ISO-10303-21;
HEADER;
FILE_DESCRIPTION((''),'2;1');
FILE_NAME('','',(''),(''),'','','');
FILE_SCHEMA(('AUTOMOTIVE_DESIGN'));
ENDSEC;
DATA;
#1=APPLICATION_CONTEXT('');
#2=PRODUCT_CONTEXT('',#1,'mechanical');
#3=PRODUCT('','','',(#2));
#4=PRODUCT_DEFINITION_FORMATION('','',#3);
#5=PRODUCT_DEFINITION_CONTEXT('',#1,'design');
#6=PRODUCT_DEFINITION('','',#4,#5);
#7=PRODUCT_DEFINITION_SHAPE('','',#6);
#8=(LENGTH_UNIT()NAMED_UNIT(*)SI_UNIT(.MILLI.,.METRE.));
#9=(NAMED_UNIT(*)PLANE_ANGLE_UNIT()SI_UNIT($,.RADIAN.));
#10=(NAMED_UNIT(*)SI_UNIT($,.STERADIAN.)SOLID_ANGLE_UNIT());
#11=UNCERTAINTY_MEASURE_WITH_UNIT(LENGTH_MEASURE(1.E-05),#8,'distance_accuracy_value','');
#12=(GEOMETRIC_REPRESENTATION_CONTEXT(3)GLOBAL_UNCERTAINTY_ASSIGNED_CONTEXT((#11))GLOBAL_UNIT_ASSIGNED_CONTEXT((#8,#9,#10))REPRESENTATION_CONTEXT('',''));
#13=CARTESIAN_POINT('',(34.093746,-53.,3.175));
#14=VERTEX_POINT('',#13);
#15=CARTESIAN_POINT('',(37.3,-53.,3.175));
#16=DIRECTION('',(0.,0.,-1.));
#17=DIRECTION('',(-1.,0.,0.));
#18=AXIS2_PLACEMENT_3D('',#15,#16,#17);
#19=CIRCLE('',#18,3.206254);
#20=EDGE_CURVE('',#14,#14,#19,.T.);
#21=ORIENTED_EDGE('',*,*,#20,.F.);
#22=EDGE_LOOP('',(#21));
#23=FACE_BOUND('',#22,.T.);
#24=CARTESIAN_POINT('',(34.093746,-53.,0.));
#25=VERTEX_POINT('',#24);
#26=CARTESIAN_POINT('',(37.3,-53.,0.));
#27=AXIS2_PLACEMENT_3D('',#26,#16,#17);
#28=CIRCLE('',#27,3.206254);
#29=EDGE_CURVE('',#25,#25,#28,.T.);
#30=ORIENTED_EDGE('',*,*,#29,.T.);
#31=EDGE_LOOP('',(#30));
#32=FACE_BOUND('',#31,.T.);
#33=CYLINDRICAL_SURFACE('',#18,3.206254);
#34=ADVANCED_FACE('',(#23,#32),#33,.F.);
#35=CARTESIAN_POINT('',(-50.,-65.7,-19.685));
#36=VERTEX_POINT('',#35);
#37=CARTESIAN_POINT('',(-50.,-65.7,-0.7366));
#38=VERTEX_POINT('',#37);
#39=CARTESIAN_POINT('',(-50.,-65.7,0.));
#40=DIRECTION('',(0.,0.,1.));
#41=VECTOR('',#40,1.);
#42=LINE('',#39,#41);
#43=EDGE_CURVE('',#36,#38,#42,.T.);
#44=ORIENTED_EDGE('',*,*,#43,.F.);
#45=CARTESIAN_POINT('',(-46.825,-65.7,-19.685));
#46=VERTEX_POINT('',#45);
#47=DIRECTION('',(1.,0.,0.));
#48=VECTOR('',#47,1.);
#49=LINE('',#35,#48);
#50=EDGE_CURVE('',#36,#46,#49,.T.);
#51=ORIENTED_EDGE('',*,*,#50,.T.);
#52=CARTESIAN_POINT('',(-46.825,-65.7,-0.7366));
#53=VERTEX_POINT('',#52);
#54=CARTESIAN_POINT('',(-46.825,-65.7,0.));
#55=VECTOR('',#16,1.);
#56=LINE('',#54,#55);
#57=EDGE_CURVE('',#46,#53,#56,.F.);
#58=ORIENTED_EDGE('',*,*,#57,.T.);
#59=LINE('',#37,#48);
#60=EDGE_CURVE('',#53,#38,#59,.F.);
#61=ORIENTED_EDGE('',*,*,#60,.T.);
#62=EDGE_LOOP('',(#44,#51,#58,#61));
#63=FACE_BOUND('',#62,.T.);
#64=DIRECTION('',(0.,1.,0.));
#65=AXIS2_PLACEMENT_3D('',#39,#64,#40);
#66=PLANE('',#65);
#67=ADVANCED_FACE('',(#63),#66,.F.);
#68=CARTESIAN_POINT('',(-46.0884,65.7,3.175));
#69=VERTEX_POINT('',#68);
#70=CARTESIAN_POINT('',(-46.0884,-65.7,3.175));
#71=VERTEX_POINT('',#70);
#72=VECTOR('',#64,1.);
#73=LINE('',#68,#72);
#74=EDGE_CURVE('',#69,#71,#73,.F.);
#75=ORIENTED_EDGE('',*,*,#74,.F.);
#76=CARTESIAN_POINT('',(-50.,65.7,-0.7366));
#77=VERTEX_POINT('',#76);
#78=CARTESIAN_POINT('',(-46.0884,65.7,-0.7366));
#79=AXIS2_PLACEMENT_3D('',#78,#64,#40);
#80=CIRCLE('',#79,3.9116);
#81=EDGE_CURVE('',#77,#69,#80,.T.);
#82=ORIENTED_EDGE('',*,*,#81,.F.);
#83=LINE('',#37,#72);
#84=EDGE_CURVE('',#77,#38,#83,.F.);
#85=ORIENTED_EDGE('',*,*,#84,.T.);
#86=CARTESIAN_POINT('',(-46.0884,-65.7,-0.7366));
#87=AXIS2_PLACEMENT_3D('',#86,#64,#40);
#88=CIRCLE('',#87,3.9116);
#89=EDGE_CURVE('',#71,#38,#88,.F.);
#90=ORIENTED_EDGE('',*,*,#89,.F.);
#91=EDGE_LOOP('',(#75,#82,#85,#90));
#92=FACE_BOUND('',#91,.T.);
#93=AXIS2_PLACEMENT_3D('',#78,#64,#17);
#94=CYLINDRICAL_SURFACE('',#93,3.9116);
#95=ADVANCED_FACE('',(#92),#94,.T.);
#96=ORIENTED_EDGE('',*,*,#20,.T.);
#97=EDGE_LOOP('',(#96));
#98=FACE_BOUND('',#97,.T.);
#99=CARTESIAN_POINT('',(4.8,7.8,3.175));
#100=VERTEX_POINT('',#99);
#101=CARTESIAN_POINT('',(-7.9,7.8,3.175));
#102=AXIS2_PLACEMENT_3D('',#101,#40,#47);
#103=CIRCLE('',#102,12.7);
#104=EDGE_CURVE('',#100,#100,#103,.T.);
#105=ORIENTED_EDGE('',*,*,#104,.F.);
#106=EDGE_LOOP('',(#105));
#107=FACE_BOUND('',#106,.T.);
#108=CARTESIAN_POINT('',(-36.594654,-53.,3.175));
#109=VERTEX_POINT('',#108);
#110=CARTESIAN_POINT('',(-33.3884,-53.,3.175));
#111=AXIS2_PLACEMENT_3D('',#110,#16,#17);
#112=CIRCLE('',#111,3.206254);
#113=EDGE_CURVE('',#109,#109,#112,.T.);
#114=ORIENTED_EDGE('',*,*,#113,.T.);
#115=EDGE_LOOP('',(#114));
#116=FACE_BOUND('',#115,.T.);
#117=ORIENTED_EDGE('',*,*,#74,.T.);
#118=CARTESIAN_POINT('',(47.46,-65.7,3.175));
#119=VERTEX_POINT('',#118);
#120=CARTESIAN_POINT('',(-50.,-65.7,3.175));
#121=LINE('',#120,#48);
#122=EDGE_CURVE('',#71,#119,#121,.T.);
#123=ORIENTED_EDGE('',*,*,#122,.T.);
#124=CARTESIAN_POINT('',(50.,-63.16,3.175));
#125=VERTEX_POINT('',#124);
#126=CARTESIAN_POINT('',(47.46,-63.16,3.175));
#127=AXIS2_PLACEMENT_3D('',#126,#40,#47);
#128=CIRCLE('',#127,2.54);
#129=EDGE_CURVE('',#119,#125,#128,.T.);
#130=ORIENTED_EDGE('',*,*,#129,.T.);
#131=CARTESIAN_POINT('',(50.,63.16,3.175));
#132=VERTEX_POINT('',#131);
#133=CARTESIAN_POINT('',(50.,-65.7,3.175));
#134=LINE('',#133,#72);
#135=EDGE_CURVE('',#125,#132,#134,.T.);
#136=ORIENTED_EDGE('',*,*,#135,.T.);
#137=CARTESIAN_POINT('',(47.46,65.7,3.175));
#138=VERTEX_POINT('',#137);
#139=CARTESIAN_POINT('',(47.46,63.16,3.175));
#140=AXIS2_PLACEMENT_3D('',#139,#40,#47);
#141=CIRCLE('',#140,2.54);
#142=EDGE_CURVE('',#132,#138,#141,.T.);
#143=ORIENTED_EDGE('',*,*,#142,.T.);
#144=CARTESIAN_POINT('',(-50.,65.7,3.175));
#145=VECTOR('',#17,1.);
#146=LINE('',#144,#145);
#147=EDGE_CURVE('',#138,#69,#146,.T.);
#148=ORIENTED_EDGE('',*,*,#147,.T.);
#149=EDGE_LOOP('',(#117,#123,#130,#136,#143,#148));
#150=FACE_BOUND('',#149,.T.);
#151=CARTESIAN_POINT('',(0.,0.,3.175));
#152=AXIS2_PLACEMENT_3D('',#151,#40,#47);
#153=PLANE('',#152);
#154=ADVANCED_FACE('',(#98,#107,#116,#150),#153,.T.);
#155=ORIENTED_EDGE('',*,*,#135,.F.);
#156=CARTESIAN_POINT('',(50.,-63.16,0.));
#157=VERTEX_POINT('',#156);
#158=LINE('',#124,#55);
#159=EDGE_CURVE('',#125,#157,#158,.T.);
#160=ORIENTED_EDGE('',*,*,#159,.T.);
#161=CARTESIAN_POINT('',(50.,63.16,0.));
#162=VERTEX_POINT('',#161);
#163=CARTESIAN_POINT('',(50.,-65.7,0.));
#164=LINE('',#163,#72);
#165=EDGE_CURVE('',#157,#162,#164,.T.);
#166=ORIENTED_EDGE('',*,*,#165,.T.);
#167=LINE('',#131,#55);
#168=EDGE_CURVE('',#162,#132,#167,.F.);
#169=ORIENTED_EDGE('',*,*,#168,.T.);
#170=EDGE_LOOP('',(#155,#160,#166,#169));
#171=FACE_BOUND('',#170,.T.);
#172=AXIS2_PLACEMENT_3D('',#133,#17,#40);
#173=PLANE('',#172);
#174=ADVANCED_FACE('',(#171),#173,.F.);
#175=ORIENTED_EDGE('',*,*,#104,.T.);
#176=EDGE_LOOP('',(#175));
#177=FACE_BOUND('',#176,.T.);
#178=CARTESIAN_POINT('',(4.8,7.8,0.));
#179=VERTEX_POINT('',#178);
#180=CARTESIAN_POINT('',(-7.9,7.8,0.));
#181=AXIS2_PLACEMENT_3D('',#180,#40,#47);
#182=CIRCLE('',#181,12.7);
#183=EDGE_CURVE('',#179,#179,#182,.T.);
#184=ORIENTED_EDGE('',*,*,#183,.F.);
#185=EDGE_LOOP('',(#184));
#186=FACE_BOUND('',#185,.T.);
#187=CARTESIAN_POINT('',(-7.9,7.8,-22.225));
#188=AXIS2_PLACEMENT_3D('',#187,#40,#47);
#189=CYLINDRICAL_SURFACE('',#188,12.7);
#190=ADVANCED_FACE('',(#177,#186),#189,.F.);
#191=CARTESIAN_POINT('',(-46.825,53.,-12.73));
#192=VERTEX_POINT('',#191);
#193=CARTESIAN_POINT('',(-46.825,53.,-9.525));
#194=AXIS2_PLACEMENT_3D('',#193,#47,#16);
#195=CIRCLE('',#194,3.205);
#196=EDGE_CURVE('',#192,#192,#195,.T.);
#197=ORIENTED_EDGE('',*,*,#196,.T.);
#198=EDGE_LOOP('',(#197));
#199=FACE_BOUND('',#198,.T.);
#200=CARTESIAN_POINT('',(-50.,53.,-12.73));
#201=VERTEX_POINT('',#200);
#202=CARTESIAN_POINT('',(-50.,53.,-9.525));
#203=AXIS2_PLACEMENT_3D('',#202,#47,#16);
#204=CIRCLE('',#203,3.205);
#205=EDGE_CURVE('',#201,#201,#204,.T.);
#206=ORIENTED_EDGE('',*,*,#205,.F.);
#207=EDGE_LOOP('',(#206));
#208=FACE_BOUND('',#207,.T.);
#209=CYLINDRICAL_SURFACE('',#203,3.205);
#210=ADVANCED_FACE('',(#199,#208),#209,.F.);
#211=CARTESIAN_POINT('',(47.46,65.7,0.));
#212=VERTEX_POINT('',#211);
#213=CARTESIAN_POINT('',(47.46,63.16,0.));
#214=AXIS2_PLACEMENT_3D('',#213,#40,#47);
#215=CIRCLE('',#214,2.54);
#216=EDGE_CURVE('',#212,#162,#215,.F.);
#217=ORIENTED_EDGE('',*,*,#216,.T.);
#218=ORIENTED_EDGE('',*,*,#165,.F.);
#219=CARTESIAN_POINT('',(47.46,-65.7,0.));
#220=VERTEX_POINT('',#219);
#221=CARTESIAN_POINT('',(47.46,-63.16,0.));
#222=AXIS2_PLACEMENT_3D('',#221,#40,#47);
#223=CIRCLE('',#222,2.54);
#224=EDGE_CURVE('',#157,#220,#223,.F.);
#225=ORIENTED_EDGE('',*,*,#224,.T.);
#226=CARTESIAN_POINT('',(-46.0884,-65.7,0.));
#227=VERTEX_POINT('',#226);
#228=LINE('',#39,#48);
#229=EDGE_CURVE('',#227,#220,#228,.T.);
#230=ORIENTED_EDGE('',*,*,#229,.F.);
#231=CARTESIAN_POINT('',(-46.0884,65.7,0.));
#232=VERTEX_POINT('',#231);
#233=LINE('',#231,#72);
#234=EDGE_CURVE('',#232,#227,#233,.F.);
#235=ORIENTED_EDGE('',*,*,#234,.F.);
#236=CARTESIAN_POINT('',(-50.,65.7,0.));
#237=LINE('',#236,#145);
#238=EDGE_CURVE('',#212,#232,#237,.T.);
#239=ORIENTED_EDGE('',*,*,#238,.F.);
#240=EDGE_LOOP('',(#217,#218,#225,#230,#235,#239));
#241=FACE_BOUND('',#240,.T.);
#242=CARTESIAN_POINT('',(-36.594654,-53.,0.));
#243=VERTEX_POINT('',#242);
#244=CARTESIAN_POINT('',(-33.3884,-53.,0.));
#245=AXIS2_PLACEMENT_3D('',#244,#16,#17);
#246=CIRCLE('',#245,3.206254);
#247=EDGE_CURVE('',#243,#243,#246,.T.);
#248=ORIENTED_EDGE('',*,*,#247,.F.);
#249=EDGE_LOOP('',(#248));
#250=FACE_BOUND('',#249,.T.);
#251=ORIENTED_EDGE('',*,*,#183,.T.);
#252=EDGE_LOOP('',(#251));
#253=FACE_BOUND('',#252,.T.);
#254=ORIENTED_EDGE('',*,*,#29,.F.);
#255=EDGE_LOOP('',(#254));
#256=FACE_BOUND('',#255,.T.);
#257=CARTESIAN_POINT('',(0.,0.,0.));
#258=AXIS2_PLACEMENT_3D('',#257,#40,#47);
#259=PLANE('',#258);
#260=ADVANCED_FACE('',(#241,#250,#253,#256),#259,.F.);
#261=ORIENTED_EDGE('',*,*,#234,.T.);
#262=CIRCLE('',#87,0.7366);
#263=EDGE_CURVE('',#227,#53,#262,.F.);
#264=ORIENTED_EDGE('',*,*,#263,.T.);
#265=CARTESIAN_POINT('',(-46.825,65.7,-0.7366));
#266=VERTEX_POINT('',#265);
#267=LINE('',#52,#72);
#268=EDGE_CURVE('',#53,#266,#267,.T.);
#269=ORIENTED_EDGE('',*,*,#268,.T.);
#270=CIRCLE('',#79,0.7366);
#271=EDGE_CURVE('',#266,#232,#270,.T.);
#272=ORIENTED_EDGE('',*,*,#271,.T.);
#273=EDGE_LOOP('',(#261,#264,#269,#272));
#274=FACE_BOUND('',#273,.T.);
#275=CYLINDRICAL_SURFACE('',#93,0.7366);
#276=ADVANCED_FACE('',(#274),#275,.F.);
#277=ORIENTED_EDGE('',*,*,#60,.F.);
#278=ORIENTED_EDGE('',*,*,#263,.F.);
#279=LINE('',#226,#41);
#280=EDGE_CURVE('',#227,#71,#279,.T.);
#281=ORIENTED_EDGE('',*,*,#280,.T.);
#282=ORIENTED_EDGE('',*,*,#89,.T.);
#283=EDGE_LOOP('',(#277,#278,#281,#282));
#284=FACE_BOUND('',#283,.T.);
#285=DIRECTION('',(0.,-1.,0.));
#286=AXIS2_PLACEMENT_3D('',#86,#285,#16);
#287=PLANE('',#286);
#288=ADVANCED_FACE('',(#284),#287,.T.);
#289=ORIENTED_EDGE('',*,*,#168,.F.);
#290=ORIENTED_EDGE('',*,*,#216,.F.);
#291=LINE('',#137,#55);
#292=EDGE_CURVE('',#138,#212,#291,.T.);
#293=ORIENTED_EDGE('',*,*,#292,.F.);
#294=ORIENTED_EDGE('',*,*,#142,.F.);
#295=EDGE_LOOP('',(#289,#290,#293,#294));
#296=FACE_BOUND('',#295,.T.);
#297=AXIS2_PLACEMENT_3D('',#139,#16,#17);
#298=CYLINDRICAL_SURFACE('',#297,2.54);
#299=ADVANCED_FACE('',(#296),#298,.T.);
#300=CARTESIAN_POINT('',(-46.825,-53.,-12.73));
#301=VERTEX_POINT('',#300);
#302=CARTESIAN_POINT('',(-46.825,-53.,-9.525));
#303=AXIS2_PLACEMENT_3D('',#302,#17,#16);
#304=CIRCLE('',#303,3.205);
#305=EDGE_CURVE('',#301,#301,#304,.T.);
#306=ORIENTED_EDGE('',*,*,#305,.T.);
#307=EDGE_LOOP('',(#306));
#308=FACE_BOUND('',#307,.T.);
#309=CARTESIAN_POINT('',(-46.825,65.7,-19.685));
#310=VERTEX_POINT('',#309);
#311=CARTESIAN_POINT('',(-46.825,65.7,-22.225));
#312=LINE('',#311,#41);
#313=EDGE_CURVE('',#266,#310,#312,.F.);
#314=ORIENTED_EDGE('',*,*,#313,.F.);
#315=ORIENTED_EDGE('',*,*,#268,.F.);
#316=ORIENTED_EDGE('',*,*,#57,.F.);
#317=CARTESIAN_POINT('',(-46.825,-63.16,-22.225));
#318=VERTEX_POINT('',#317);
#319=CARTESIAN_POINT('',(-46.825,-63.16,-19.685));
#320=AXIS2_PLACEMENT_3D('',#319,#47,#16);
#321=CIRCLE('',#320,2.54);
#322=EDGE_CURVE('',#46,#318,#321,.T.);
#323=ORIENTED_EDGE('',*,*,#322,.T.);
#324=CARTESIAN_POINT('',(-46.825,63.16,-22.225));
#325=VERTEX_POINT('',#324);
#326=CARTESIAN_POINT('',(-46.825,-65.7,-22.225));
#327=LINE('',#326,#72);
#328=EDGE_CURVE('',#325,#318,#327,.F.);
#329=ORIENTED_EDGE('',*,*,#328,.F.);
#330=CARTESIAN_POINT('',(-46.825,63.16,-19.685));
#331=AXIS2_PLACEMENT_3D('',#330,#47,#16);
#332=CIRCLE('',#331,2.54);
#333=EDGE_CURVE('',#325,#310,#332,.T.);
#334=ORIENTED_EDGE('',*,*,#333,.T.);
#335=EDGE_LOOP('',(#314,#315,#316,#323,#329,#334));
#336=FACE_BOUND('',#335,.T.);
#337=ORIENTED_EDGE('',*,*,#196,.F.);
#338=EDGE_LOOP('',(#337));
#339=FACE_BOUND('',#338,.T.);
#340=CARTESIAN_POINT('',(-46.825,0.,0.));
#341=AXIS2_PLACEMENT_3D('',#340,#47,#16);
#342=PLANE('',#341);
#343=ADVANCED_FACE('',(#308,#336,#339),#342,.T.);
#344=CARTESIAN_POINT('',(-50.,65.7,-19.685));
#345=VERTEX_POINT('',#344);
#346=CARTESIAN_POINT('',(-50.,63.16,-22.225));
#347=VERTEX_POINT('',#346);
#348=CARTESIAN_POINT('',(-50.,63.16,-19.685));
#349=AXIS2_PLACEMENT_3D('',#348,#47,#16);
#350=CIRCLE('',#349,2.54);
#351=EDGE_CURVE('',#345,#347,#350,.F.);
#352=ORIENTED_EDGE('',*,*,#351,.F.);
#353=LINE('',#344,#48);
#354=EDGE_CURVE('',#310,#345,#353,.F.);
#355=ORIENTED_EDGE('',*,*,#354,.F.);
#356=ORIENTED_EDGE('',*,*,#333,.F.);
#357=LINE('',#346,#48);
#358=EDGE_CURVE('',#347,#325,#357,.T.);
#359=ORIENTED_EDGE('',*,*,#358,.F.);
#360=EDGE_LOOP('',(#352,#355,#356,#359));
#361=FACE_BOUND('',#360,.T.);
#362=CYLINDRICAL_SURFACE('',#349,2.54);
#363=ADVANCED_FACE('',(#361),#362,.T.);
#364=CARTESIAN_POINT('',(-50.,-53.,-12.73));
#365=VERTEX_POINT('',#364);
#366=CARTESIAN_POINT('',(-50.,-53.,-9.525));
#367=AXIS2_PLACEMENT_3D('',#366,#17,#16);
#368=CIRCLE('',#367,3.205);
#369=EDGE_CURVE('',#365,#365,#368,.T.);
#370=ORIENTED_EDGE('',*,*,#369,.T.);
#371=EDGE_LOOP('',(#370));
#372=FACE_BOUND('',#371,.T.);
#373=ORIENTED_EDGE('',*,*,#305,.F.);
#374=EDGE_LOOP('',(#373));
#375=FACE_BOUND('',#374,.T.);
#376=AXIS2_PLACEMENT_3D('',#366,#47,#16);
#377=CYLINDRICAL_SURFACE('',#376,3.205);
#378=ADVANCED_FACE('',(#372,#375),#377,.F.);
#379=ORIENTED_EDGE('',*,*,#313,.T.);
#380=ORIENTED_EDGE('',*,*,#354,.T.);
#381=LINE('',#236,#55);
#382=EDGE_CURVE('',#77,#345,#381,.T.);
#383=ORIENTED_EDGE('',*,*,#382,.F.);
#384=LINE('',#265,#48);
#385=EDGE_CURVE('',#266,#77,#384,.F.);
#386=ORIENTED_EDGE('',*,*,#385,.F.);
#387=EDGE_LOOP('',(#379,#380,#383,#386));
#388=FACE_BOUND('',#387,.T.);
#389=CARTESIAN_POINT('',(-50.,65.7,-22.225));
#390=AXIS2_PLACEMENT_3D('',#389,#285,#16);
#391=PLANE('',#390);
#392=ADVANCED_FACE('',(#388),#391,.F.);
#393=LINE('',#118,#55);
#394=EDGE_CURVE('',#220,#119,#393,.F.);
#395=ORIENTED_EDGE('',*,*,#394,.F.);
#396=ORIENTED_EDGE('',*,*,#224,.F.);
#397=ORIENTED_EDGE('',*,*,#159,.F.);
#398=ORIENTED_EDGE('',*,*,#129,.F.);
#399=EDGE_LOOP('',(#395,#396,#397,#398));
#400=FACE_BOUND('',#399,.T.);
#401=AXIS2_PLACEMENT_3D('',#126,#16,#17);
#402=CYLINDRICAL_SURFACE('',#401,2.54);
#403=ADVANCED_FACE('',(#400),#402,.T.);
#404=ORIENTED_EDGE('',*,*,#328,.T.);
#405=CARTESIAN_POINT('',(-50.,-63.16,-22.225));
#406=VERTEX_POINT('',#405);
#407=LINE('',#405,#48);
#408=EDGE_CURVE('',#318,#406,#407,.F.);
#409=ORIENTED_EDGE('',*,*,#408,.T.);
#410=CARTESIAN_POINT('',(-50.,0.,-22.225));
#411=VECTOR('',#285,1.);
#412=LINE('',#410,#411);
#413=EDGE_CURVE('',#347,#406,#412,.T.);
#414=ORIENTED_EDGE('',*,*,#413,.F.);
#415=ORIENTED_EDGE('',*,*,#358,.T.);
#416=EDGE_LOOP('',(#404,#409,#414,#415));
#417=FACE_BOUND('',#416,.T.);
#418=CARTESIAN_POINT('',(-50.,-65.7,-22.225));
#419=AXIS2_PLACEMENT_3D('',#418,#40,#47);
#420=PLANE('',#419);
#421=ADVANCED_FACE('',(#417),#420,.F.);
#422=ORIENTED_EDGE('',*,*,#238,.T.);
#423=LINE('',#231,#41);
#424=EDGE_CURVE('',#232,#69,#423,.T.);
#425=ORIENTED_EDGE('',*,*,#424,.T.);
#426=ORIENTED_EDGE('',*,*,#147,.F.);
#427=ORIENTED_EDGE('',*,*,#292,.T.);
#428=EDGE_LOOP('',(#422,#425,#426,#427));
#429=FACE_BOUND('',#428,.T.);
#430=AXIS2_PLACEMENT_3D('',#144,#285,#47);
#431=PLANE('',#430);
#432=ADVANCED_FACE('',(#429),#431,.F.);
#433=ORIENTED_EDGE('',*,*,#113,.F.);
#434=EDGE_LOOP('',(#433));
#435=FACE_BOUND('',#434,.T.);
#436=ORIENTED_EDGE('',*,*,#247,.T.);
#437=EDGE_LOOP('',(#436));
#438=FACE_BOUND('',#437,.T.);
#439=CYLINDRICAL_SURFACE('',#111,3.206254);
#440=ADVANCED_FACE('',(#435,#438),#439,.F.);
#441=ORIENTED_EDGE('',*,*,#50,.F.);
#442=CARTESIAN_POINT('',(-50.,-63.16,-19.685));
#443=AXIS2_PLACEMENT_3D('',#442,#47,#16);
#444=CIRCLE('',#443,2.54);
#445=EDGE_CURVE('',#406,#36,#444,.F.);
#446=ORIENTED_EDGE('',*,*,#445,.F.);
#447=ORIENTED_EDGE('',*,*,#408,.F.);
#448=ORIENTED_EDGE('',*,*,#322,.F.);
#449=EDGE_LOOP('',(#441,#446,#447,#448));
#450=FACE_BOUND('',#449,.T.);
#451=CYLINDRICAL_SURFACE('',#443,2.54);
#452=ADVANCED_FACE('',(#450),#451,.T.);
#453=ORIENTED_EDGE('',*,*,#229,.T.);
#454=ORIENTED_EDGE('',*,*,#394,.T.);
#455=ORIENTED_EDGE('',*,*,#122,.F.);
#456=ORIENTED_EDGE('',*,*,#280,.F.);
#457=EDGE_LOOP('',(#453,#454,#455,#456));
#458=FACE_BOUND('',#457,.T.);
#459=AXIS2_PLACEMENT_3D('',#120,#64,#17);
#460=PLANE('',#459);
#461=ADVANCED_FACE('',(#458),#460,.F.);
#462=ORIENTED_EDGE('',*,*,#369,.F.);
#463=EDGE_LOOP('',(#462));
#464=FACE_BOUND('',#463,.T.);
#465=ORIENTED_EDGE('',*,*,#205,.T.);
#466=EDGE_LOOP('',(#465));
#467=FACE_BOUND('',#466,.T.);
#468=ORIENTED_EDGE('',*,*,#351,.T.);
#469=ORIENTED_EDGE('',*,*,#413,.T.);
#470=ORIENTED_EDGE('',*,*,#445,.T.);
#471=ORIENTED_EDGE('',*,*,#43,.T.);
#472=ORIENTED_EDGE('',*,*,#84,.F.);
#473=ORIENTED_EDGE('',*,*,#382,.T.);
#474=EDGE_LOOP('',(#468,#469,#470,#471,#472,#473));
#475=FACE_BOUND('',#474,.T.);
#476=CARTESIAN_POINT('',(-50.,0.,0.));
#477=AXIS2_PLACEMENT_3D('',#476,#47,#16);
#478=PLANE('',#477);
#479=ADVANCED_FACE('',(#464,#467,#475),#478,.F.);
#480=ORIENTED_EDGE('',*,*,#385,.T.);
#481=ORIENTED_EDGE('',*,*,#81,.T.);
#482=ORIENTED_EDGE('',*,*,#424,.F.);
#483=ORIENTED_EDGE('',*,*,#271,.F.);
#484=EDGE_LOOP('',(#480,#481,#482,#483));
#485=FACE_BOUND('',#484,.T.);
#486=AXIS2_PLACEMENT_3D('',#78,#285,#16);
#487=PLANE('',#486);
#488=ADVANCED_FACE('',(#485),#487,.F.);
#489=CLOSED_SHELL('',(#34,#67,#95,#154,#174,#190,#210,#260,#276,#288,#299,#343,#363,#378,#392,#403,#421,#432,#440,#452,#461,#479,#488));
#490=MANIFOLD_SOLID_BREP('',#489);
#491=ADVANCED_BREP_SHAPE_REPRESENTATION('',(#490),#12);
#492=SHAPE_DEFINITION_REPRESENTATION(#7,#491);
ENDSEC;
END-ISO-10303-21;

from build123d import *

# Parameters (mm, degrees)
SKETCH1_W                    = 131.4
SKETCH1_H                    = 100
BASE_FLANGE1_DEPTH           = 3.175
EDGE_FLANGE1_STRIP_W         = 14.1732
EDGE_FLANGE1_STRIP_H         = 3.175
EDGE_FLANGE1_STRIP_CUT_DEPTH = 131.4
EDGE_FLANGE1_DEPTH           = 131.4
FILLET1_R                    = 2.54
SKETCH15_R                   = 12.7
MOTOR_HOLE_DEPTH             = 87.380842784
SKETCH9_R                    = 3.205
CUT_EXTRUDE1_DEPTH           = 120.102985899
SKETCH10_R                   = 3.206253706
CUT_EXTRUDE2_DEPTH           = 86.501114759


# Sheet-metal steps are written as plain solids
with BuildPart() as part:
    # Sketch1 → Base-Flange1 (new body)
    with BuildSketch(Plane(origin=(0, 0, 0), x_dir=(0, 1, 0), z_dir=(0, 0, 1))):
        Rectangle(SKETCH1_W, SKETCH1_H)
    extrude(amount=BASE_FLANGE1_DEPTH)

    # Edge-Flange1 strip (across the edge) → Edge-Flange1 strip cut (cut)
    with BuildSketch(Plane(origin=(-50, -65.7, 0), x_dir=(1, 0, 0), z_dir=(0, 1, 0))):
        with Locations((-3.175, -1.5875)):
            Rectangle(EDGE_FLANGE1_STRIP_W, EDGE_FLANGE1_STRIP_H)
    extrude(amount=EDGE_FLANGE1_STRIP_CUT_DEPTH, mode=Mode.SUBTRACT)

    # Edge-Flange1 section (across the edge) → Edge-Flange1 (add)
    with BuildSketch(Plane(origin=(-50, -65.7, 0), x_dir=(1, 0, 0), z_dir=(0, 1, 0))):
        with BuildLine():
            Line((0, 0.7366), (0, 22.225))
            Line((0, 22.225), (3.175, 22.225))
            Line((3.175, 22.225), (3.175, 0.7366))
            ThreePointArc((3.175, 0.7366), (3.390745145, 0.215745145), (3.9116, 0))
            Line((3.9116, 0), (3.9116, -3.175))
            ThreePointArc((3.9116, -3.175), (1.145681115, -2.029318885), (0, 0.7366))
        make_face()
    extrude(amount=EDGE_FLANGE1_DEPTH)

    # Fillet1
    fillet1_edges = [part.edges().sort_by_distance(p)[0] for p in [
        (-48.4125, -65.7, -22.225),
        (-48.4125, 65.7, -22.225),
        (50, 65.7, 1.5875),
        (50, -65.7, 1.5875),
    ]]
    fillet(fillet1_edges, radius=FILLET1_R)

    # Sketch15 → Motor Hole (cut, through all)
    with BuildSketch(Plane.XY.offset(3.175)):
        with Locations((-7.9, 7.8)):
            Circle(SKETCH15_R)
    extrude(amount=-MOTOR_HOLE_DEPTH, mode=Mode.SUBTRACT)

    # Sketch9 → Cut-Extrude1 (cut, through all)
    with BuildSketch(Plane.YZ.offset(-46.825)):
        with Locations(Location((53, -9.525, 0), (0, 0, 270))):
            Circle(SKETCH9_R)
    cut_extrude1 = extrude(amount=-CUT_EXTRUDE1_DEPTH, mode=Mode.SUBTRACT)

    # Mirror1: Cut-Extrude1 across plane
    add(cut_extrude1.mirror(Plane.ZX), mode=Mode.SUBTRACT)

    # Sketch10 → Cut-Extrude2 (cut, through all)
    with BuildSketch(Plane(origin=(0, 0, 0), x_dir=(1, 0, 0), z_dir=(0, 0, -1))):
        with Locations(Location((-33.3884, 53, 0), (0, 0, 180))):
            Circle(SKETCH10_R)
        with Locations(Location((37.3, 53, 0), (0, 0, 180))):
            Circle(SKETCH10_R)
    extrude(amount=-CUT_EXTRUDE2_DEPTH, mode=Mode.SUBTRACT)


solid = part.part
